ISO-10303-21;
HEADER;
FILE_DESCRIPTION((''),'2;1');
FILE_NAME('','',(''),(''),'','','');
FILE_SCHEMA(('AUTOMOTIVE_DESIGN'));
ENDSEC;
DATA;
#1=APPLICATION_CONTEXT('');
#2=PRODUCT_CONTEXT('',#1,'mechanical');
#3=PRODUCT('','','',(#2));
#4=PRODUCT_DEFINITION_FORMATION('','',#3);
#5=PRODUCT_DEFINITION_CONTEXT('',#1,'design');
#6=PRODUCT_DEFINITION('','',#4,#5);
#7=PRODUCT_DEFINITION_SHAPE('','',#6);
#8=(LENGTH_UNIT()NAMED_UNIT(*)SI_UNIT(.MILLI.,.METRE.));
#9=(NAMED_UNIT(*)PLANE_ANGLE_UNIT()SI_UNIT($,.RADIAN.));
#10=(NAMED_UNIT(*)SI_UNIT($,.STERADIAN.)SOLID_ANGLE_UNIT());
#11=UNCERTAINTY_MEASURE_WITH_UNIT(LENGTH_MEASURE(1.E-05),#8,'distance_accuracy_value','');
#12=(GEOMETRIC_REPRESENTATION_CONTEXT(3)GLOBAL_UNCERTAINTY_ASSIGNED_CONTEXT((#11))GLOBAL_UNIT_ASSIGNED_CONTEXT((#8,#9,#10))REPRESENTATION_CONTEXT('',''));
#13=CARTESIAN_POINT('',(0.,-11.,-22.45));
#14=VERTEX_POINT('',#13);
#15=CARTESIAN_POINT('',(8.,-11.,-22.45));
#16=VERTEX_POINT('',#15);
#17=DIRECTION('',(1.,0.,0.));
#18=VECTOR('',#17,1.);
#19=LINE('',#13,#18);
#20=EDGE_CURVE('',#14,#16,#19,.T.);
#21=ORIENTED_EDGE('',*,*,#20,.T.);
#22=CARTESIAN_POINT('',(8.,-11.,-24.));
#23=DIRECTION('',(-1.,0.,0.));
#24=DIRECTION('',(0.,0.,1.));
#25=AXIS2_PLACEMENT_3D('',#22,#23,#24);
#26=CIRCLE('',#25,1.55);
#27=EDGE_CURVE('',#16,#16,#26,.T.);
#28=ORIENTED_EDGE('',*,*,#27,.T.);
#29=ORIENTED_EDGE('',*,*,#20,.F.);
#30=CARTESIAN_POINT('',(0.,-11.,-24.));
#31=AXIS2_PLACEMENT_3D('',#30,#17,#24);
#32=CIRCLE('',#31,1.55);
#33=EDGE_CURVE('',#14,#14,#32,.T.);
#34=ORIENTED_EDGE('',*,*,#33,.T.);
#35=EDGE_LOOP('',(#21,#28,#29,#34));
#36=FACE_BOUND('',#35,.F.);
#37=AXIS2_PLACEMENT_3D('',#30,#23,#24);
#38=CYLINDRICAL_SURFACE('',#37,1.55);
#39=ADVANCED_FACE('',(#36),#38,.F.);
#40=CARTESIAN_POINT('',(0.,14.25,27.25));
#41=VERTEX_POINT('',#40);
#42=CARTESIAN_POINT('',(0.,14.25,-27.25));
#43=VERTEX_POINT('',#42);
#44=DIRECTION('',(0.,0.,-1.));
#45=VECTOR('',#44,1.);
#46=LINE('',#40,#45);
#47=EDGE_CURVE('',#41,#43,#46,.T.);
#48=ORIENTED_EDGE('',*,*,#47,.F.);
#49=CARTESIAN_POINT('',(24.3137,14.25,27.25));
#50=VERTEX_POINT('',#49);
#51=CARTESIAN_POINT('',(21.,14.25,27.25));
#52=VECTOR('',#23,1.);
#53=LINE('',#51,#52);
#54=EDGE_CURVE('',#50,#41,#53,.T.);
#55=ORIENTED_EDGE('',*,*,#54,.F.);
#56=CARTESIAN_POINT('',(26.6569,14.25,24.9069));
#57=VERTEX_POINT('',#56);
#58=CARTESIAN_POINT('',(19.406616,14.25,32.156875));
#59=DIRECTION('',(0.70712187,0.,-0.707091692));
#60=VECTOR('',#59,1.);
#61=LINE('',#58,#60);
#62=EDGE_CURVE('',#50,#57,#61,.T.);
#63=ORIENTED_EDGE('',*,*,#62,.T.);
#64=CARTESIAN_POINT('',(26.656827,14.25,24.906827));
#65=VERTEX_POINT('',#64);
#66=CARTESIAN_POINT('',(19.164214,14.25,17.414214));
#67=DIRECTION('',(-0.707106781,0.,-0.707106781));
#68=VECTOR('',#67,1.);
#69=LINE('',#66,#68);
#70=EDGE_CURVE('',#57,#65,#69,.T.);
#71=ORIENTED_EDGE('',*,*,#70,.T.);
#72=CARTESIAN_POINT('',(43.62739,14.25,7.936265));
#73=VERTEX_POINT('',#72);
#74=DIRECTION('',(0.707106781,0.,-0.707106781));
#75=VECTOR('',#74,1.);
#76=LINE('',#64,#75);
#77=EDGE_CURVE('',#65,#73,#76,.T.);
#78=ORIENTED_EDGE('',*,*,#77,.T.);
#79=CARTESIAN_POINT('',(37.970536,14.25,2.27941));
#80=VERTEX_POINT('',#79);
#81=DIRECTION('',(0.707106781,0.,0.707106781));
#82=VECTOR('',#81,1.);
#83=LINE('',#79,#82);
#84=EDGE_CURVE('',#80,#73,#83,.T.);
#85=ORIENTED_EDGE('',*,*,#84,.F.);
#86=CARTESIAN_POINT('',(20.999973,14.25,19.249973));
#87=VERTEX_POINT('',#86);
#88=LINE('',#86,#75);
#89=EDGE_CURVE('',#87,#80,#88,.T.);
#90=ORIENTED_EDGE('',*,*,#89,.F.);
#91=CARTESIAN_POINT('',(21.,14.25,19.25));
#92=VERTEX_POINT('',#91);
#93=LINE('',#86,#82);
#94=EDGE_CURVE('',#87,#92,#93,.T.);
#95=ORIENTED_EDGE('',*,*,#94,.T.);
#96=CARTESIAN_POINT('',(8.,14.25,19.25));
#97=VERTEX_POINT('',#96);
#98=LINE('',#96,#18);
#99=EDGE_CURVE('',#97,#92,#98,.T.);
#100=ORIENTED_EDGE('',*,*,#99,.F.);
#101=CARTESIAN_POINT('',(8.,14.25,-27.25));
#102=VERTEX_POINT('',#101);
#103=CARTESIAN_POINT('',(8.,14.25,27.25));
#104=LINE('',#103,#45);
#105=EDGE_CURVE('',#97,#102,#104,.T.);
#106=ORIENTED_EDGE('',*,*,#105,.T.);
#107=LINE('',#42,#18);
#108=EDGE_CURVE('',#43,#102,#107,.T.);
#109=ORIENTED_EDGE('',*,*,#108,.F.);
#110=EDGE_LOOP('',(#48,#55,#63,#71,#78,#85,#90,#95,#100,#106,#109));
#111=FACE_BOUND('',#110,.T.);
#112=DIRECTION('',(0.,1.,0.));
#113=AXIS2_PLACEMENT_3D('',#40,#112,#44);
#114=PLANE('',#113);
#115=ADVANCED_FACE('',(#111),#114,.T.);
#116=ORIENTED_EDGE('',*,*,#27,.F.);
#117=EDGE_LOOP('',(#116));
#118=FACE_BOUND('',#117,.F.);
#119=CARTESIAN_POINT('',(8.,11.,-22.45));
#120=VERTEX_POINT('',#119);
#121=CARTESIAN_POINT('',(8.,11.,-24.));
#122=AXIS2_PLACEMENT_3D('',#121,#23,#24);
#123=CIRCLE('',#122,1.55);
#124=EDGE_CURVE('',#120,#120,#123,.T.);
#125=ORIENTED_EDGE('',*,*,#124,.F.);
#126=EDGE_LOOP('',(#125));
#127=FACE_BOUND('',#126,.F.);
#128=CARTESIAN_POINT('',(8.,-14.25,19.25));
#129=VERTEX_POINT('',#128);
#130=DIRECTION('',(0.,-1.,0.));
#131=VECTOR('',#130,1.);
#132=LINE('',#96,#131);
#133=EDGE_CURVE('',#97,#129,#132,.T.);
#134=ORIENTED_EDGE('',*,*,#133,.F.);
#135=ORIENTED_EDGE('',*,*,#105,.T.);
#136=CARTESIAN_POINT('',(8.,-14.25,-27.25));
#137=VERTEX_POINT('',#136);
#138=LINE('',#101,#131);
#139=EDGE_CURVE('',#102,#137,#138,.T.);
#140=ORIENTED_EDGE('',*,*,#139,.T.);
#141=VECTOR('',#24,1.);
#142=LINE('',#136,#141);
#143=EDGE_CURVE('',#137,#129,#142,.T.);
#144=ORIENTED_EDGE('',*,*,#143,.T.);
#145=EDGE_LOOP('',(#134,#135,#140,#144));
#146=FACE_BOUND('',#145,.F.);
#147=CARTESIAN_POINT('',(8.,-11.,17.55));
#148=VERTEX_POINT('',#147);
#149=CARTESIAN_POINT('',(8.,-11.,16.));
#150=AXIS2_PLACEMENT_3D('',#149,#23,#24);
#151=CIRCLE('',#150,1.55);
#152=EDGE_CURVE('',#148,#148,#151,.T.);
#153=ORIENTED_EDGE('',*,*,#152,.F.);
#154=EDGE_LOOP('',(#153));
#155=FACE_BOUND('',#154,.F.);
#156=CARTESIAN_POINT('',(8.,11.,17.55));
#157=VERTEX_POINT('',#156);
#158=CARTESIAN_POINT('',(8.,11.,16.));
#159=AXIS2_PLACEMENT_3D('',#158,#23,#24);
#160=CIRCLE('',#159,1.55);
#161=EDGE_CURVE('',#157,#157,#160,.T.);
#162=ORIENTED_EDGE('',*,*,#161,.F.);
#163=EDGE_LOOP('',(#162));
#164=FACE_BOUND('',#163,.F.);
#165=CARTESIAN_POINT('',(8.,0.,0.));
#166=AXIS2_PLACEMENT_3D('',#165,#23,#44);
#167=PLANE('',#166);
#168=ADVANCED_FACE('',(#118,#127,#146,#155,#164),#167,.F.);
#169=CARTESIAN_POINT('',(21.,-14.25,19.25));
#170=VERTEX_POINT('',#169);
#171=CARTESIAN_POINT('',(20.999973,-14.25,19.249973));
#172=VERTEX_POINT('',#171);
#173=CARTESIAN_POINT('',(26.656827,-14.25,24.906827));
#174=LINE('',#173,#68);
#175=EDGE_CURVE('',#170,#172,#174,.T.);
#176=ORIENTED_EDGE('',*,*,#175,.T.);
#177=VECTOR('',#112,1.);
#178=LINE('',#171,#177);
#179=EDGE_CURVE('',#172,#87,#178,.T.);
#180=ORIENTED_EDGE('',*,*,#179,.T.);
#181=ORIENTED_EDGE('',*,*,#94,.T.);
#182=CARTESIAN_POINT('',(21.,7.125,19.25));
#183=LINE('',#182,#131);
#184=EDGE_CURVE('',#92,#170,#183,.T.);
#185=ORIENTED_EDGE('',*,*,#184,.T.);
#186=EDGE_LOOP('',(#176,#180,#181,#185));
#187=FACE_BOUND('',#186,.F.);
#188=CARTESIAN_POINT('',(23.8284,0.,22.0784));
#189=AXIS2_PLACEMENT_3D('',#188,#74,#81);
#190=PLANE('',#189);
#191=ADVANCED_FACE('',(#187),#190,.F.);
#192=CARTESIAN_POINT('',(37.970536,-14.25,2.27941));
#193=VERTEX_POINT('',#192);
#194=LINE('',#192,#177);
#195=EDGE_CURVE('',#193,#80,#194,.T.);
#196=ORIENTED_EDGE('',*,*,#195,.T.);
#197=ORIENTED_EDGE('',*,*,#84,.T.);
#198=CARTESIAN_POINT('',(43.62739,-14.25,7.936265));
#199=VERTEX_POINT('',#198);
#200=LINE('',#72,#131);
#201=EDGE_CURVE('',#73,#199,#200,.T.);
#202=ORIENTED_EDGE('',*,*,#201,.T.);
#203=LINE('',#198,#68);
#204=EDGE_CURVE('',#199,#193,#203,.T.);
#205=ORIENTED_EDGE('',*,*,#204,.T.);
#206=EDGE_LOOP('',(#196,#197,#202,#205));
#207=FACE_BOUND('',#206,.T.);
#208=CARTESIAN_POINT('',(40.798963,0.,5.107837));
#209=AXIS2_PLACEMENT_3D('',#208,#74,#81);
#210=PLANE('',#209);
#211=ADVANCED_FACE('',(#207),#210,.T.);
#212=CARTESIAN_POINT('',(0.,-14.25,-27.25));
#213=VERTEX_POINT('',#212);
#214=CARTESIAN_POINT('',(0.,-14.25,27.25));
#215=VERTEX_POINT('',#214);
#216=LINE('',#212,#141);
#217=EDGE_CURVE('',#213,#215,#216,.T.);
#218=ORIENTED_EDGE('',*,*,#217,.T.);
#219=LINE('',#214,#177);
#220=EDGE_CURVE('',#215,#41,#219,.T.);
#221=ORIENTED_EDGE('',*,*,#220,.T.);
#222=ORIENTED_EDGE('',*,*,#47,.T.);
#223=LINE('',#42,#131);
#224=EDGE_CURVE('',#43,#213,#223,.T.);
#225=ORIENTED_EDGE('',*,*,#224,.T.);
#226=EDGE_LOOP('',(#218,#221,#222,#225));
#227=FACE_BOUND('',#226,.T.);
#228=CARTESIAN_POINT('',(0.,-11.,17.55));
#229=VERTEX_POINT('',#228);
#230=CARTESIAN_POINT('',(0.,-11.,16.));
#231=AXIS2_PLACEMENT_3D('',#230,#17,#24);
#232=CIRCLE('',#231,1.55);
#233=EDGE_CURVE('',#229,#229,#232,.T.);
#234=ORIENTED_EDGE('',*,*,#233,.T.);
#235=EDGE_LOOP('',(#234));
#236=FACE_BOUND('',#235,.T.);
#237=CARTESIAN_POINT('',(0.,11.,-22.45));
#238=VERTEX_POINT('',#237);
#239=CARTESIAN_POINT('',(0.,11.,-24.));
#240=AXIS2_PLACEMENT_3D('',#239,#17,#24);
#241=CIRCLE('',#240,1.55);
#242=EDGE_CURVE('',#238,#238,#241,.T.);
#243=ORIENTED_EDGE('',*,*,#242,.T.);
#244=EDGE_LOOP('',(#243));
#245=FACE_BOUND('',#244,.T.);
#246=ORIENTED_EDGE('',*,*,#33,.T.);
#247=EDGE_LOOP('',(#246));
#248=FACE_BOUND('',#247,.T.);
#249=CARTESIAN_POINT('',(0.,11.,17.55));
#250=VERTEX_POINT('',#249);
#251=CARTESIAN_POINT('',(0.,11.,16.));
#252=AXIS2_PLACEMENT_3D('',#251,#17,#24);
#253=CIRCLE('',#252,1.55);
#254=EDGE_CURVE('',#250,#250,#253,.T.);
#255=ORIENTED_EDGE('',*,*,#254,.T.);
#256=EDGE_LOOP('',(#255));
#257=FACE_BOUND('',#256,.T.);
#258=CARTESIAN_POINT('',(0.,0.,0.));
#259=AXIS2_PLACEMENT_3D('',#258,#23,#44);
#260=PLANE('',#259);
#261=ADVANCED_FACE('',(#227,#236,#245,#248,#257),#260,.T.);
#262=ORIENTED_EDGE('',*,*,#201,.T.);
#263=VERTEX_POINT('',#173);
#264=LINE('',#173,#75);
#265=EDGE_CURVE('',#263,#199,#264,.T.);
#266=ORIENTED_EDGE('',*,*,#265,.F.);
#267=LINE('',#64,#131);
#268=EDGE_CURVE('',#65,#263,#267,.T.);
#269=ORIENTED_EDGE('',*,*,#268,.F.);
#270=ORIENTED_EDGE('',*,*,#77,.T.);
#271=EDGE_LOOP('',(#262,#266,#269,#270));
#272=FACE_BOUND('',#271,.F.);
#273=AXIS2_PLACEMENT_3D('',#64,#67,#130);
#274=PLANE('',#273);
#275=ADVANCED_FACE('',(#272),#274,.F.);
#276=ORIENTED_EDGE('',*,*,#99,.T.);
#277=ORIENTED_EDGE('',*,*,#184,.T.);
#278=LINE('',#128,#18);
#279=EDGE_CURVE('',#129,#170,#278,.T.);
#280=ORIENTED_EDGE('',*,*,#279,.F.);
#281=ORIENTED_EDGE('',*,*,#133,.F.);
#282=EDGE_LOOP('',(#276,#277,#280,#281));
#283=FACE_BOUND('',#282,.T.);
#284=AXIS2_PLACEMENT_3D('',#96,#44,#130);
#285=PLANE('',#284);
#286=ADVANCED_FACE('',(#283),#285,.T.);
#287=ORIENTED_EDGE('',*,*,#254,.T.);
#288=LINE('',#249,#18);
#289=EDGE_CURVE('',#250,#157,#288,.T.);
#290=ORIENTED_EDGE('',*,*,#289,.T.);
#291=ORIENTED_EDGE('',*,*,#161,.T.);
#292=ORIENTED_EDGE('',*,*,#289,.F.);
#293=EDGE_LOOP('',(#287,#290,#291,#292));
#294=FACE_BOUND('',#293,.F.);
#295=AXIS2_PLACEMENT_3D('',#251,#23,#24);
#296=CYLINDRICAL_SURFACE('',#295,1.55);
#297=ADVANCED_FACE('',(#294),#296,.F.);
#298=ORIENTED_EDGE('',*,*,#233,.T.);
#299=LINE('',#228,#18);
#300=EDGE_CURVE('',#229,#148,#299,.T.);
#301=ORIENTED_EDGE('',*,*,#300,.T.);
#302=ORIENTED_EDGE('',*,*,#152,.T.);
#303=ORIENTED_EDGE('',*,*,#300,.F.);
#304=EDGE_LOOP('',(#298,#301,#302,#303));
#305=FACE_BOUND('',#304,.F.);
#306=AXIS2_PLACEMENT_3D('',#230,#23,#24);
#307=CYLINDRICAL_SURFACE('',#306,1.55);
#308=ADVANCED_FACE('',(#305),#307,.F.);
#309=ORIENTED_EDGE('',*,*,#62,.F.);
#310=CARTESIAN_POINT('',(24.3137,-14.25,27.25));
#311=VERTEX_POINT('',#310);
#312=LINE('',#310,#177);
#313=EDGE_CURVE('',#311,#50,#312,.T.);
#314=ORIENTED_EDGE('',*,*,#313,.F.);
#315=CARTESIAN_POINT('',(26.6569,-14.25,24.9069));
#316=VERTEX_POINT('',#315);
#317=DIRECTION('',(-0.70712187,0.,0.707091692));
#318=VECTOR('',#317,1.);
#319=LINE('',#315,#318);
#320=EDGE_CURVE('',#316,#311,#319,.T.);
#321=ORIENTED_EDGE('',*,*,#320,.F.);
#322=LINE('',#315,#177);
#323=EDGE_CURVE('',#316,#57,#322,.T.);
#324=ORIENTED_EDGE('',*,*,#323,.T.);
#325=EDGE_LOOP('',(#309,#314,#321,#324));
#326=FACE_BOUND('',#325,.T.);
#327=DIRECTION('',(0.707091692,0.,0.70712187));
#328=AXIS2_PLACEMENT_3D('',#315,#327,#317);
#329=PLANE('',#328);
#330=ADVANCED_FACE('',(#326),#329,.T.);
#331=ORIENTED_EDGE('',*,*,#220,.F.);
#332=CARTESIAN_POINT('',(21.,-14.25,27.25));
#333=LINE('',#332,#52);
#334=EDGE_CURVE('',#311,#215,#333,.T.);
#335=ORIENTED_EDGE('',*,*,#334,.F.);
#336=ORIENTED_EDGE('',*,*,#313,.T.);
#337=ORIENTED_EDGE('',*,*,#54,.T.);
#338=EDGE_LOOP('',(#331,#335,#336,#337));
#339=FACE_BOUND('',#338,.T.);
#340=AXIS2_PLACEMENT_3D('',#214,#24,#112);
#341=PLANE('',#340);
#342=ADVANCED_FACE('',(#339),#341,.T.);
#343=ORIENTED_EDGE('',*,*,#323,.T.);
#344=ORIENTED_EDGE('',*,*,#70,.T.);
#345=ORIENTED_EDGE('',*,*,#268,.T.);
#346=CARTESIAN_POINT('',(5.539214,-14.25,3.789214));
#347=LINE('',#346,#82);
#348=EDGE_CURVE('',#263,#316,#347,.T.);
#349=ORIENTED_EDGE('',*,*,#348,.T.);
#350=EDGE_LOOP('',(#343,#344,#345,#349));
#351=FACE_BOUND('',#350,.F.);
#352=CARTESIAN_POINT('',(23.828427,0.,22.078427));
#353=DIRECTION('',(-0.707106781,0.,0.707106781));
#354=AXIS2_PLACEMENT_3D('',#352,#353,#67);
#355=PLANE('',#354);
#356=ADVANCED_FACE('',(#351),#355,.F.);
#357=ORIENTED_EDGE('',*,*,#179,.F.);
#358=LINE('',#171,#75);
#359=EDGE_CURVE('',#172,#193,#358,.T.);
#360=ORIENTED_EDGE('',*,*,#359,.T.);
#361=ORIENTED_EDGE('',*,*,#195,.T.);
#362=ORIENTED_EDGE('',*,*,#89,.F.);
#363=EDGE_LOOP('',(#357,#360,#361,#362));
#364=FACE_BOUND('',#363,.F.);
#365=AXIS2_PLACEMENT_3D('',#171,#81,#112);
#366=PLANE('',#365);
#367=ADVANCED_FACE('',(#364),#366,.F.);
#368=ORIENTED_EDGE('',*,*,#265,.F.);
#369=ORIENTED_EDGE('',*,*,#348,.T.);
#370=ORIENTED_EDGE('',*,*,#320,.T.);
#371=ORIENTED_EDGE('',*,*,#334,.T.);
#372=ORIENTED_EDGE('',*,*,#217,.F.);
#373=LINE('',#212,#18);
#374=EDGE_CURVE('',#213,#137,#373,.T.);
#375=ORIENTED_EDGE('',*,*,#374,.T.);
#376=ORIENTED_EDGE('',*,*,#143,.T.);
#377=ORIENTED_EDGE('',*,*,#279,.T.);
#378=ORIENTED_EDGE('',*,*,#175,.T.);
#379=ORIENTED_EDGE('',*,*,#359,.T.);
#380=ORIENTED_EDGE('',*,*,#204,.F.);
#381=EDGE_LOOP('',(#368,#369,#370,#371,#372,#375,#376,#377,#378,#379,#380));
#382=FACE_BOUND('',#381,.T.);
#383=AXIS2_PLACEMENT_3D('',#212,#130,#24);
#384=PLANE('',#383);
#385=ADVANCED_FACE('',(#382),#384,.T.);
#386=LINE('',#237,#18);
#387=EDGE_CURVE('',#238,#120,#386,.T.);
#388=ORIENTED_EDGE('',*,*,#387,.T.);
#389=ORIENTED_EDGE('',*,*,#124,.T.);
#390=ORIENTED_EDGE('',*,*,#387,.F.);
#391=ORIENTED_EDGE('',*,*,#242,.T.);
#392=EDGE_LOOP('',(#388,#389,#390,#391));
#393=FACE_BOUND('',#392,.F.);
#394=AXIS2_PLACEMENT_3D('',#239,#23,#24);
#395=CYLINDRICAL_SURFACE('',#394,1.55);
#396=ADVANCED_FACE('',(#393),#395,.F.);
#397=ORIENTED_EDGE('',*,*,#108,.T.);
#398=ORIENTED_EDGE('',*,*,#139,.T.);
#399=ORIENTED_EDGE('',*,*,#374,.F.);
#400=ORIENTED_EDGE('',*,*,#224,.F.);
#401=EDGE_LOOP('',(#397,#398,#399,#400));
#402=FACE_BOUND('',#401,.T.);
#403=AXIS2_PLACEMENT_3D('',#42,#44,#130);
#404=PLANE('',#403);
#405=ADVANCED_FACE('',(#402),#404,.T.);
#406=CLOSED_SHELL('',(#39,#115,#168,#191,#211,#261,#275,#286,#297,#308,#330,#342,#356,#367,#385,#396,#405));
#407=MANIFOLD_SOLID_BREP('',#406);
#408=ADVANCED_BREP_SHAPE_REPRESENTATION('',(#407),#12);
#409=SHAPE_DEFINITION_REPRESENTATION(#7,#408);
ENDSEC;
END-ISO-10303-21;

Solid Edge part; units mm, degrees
sketch "Sketch1" plane through (0, 0, 0) normal (1, 0, 0) x (0, 1, 0)
  line L0 (-14.25, -27.25) -> (-14.25, 27.25)
  line L1 (-14.25, 27.25) -> (14.25, 27.25)
  line L2 (14.25, 27.25) -> (14.25, -27.25)
  line L3 (14.25, -27.25) -> (-14.25, -27.25)
extrude "Protrusion1" add sketch "Sketch1" along normal blind 8
sketch "Sketch2" plane through (8, 0, 0) normal (1, 0, 0) x (0, 1, 0)
  line L0 (14.25, 19.25) -> (-14.25, 19.25)
  line L1 (-14.25, 19.25) -> (-14.25, 27.25)
  line L2 (-14.25, 27.25) -> (14.25, 27.25)
  line L3 (14.25, 27.25) -> (14.25, 19.25)
extrude "Extrusionsausprägung_2" add sketch "Sketch2" along normal blind 13
hole "Bohrung_1" at (0, 11, -24) direction (1, 0, 0) diameter 3.1 end through all
pattern_linear "Pattern1" count 2 spacing 22 along (0, -1, 0) count 2 spacing 40 along (0, 0, 1) of "Bohrung_1"
draft "Formschräge_3" angle 45 neutral plane through (18.75, 0, 19.25) normal (0, 0, -1) pull direction (0, 0, -1) face at (21, 9.215, 25.9967)
sketch "Sketch3" plane through (29.25, 0, 27.5) normal (0.7071068, 0, -0.7071068) x (0, 1, 0)
  line L0 (-14.25, -11.6673) -> (14.25, -11.6673)
  line L1 (14.25, -11.6673) -> (14.25, -3.6673)
  line L2 (14.25, -3.6673) -> (-14.25, -3.6673)
  line L3 (-14.25, -3.6673) -> (-14.25, -11.6673)
  dimension "D1" = 28.5
  dimension "D2" = 8
extrude "Extrusionsausprägung_3" add sketch "Sketch3" along normal blind 24
hole "Bohrung_3" [suppressed]
pattern "Pattern3" [suppressed]
sketch "Sketch4" plane through (32.5061, -14.25, 0) normal (0, -1, 0) x (1, 0, 0)
  line L0 (-5.8492, 24.9069) -> (-8.1924, 27.25)
extrude "Cutout1" cut sketch "Sketch4" against normal through all material side at (25.5207, -14.25, 26.1138)
